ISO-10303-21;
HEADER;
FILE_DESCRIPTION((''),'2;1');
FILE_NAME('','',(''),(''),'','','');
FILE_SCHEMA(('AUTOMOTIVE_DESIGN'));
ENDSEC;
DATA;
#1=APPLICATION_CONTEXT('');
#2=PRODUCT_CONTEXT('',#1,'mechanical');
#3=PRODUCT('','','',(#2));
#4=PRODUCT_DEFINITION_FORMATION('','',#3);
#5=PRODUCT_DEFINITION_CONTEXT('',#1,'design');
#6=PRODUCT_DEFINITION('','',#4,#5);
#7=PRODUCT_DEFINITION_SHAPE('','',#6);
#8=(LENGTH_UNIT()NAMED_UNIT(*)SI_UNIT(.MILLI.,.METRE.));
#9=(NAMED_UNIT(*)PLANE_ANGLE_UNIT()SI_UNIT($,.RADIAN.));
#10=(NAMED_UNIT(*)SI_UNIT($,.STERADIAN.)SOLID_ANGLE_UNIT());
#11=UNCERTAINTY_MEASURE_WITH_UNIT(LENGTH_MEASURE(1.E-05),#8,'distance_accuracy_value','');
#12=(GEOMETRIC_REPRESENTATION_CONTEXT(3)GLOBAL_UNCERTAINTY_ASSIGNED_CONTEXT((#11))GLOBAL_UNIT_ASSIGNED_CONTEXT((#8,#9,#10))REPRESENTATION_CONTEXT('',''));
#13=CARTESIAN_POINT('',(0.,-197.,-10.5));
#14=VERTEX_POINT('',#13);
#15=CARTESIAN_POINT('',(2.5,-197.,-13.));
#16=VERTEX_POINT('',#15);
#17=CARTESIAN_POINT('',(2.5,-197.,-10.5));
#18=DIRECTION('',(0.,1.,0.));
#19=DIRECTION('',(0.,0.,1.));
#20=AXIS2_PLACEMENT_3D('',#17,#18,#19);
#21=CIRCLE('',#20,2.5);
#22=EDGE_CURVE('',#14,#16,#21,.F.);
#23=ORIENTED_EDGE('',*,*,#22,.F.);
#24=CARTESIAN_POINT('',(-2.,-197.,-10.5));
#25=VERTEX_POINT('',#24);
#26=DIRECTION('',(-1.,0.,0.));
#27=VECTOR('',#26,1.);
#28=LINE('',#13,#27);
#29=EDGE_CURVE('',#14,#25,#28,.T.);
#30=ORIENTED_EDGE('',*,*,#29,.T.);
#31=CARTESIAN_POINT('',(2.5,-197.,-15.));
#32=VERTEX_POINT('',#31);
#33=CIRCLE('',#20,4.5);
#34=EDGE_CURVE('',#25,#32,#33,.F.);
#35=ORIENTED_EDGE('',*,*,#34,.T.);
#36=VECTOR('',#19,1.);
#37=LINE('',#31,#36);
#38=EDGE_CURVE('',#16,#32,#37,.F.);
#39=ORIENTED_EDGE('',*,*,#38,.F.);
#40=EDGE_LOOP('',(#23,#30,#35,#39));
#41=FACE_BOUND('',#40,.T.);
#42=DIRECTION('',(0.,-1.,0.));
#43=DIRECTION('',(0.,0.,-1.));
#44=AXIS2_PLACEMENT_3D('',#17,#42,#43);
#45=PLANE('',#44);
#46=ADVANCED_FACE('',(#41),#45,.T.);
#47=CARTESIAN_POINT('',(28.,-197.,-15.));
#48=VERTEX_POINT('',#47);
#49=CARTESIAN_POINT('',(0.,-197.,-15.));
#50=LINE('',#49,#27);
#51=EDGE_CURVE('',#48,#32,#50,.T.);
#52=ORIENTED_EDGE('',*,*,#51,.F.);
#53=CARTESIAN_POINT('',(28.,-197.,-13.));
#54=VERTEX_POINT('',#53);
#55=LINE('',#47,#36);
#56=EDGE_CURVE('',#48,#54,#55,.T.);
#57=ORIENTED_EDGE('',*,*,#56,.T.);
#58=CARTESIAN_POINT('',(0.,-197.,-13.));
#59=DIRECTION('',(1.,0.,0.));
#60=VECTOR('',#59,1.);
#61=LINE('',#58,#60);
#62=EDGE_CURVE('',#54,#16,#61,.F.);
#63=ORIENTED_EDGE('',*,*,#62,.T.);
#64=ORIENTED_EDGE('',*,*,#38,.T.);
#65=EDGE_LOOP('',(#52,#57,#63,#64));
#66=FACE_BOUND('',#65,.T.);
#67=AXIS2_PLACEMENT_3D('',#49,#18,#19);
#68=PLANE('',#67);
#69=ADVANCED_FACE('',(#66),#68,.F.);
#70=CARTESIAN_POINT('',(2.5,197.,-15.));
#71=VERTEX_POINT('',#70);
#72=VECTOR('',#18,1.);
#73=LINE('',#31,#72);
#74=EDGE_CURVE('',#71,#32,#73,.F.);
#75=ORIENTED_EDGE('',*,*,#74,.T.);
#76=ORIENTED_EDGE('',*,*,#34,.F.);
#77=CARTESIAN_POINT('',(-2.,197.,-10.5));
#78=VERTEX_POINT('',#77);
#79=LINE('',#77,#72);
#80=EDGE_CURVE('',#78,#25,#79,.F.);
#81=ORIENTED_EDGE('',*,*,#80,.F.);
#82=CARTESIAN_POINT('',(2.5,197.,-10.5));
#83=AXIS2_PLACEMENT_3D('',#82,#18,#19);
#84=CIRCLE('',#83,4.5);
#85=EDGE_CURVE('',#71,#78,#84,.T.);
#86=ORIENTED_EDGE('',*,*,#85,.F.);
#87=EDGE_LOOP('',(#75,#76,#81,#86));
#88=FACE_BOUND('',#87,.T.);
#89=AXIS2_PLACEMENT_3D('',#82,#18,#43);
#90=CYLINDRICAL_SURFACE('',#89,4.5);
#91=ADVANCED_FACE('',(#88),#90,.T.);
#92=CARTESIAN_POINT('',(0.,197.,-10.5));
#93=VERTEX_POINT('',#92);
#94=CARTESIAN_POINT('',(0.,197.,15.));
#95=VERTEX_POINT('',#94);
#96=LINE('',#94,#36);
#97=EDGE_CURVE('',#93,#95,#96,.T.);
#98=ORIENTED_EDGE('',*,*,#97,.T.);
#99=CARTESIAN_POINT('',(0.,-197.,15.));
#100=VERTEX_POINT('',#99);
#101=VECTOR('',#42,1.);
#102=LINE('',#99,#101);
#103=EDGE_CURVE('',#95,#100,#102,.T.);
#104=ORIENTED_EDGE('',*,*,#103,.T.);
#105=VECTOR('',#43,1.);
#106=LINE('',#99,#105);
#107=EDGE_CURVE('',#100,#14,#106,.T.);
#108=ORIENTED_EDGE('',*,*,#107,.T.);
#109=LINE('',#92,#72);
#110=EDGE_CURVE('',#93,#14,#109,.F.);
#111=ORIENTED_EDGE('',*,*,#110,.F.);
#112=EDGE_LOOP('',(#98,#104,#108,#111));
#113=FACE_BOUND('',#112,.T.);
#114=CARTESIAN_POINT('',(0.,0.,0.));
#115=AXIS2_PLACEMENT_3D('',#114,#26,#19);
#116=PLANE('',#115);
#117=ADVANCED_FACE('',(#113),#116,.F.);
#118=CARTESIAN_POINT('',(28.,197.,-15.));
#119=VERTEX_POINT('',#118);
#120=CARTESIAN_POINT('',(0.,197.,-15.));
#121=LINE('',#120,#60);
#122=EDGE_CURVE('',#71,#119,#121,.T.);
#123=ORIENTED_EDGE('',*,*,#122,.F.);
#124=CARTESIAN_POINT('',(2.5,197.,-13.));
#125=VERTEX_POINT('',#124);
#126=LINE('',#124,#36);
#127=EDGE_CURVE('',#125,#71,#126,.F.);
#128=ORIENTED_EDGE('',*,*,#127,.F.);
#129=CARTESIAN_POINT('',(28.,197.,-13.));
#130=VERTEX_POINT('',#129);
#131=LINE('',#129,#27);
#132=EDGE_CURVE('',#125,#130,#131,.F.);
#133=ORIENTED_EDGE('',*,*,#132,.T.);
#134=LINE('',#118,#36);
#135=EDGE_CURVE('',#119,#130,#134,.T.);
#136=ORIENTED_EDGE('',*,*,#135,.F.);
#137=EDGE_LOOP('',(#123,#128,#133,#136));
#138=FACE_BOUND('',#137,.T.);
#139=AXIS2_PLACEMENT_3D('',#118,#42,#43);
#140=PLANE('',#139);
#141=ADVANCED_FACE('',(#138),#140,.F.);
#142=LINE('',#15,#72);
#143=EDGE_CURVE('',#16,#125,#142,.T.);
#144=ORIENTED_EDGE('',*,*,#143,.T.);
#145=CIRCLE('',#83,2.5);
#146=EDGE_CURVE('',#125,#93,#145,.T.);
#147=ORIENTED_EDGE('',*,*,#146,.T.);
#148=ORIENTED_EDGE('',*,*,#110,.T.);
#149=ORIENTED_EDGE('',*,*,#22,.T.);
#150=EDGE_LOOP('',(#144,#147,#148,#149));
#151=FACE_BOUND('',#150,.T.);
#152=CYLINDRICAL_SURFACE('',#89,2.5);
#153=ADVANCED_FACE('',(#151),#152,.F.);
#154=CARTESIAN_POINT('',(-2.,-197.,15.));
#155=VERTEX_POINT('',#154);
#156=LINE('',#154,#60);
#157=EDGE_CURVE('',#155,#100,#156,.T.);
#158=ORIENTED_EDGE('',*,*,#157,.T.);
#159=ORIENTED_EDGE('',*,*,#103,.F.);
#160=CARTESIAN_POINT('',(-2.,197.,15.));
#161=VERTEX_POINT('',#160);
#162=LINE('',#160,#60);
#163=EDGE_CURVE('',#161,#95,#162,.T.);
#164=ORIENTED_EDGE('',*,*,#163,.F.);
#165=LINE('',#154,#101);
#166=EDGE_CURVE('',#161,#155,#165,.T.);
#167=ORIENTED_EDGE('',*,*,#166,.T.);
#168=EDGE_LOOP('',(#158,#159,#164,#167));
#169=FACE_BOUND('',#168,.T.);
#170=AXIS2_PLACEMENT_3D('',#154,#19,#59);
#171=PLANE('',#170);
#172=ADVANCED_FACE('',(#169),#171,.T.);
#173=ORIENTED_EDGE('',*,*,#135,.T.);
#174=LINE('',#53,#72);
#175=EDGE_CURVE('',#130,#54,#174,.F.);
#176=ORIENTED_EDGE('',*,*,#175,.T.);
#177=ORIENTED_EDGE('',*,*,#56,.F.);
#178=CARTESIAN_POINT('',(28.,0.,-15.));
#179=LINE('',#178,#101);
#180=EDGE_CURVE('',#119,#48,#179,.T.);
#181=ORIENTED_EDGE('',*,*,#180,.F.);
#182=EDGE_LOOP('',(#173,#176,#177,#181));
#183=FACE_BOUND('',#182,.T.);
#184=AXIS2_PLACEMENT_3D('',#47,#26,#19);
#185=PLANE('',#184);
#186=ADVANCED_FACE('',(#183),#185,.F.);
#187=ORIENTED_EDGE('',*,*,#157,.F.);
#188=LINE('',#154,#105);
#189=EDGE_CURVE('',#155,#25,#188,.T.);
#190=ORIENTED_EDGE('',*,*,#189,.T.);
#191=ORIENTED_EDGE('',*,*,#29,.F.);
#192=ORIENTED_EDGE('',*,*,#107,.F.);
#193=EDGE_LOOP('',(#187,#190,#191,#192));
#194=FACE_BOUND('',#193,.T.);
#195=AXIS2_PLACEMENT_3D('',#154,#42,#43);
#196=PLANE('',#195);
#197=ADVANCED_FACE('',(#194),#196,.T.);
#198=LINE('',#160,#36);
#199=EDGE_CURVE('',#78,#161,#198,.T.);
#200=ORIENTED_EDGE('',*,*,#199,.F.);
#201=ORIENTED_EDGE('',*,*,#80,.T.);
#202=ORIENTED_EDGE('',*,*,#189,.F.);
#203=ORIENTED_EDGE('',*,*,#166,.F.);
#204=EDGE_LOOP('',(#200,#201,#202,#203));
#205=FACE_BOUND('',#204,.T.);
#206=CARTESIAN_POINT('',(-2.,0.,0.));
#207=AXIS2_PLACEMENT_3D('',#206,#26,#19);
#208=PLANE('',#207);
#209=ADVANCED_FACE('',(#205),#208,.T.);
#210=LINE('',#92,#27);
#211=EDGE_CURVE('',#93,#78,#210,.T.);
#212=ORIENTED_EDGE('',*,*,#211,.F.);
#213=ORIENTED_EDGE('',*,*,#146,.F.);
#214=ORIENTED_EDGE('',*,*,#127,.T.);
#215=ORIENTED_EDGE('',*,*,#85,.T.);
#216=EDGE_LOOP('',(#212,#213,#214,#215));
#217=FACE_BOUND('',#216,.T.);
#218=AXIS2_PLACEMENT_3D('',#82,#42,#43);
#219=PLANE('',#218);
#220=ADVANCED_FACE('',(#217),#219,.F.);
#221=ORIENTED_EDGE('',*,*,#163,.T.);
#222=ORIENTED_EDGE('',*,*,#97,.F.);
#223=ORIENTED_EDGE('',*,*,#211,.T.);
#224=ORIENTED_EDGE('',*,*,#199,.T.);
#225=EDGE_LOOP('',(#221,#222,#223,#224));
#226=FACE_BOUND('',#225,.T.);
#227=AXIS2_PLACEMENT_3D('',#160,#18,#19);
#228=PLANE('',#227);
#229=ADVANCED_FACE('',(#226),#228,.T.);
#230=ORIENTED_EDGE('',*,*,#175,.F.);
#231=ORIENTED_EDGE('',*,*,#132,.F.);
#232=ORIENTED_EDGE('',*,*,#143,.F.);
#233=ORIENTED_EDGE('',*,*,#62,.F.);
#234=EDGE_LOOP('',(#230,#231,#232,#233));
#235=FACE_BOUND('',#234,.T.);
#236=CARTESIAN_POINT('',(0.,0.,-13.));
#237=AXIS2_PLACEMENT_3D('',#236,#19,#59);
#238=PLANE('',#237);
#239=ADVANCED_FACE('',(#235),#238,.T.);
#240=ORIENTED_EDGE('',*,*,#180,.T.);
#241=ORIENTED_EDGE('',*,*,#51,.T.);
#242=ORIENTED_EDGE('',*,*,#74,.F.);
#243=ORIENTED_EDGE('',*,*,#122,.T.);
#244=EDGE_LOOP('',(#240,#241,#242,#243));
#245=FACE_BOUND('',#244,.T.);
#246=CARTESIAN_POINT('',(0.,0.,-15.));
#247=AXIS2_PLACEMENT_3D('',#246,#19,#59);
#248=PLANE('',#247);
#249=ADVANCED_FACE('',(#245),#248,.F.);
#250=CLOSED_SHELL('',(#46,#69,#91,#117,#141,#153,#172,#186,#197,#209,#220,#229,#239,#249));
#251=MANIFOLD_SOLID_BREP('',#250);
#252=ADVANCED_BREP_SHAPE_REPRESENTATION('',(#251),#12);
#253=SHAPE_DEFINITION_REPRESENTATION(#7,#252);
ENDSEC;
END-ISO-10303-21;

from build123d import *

# Parameters (mm, degrees)
SKETCH1_W                    = 30
SKETCH1_H                    = 394
BASE_FLANGE1_DEPTH           = 2
EDGE_FLANGE1_STRIP_W         = 13
EDGE_FLANGE1_STRIP_H         = 2
EDGE_FLANGE1_STRIP_CUT_DEPTH = 394
EDGE_FLANGE1_DEPTH           = 394


# Sheet-metal steps are written as plain solids
with BuildPart() as part:
    # Sketch1 → Base-Flange1 (new body)
    with BuildSketch(Plane(origin=(0, 0, 0), x_dir=(0, 0, -1), z_dir=(1, 0, 0))):
        Rectangle(SKETCH1_W, SKETCH1_H)
    extrude(amount=-BASE_FLANGE1_DEPTH)

    # Edge-Flange1 strip (across the edge) → Edge-Flange1 strip cut (cut)
    with BuildSketch(Plane(origin=(0, -197, -15), x_dir=(0, 0, 1), z_dir=(0, 1, 0))):
        with Locations((-2, -1)):
            Rectangle(EDGE_FLANGE1_STRIP_W, EDGE_FLANGE1_STRIP_H)
    extrude(amount=EDGE_FLANGE1_STRIP_CUT_DEPTH, mode=Mode.SUBTRACT)

    # Edge-Flange1 section (across the edge) → Edge-Flange1 (add)
    with BuildSketch(Plane(origin=(0, -197, -15), x_dir=(0, 0, 1), z_dir=(0, 1, 0))):
        with BuildLine():
            Line((0, 2.5), (0, 28))
            Line((0, 28), (2, 28))
            Line((2, 28), (2, 2.5))
            ThreePointArc((2, 2.5), (2.732233047, 0.732233047), (4.5, 0))
            Line((4.5, 0), (4.5, -2))
            ThreePointArc((4.5, -2), (1.318019485, -0.681980515), (0, 2.5))
        make_face()
    extrude(amount=EDGE_FLANGE1_DEPTH)


solid = part.part
